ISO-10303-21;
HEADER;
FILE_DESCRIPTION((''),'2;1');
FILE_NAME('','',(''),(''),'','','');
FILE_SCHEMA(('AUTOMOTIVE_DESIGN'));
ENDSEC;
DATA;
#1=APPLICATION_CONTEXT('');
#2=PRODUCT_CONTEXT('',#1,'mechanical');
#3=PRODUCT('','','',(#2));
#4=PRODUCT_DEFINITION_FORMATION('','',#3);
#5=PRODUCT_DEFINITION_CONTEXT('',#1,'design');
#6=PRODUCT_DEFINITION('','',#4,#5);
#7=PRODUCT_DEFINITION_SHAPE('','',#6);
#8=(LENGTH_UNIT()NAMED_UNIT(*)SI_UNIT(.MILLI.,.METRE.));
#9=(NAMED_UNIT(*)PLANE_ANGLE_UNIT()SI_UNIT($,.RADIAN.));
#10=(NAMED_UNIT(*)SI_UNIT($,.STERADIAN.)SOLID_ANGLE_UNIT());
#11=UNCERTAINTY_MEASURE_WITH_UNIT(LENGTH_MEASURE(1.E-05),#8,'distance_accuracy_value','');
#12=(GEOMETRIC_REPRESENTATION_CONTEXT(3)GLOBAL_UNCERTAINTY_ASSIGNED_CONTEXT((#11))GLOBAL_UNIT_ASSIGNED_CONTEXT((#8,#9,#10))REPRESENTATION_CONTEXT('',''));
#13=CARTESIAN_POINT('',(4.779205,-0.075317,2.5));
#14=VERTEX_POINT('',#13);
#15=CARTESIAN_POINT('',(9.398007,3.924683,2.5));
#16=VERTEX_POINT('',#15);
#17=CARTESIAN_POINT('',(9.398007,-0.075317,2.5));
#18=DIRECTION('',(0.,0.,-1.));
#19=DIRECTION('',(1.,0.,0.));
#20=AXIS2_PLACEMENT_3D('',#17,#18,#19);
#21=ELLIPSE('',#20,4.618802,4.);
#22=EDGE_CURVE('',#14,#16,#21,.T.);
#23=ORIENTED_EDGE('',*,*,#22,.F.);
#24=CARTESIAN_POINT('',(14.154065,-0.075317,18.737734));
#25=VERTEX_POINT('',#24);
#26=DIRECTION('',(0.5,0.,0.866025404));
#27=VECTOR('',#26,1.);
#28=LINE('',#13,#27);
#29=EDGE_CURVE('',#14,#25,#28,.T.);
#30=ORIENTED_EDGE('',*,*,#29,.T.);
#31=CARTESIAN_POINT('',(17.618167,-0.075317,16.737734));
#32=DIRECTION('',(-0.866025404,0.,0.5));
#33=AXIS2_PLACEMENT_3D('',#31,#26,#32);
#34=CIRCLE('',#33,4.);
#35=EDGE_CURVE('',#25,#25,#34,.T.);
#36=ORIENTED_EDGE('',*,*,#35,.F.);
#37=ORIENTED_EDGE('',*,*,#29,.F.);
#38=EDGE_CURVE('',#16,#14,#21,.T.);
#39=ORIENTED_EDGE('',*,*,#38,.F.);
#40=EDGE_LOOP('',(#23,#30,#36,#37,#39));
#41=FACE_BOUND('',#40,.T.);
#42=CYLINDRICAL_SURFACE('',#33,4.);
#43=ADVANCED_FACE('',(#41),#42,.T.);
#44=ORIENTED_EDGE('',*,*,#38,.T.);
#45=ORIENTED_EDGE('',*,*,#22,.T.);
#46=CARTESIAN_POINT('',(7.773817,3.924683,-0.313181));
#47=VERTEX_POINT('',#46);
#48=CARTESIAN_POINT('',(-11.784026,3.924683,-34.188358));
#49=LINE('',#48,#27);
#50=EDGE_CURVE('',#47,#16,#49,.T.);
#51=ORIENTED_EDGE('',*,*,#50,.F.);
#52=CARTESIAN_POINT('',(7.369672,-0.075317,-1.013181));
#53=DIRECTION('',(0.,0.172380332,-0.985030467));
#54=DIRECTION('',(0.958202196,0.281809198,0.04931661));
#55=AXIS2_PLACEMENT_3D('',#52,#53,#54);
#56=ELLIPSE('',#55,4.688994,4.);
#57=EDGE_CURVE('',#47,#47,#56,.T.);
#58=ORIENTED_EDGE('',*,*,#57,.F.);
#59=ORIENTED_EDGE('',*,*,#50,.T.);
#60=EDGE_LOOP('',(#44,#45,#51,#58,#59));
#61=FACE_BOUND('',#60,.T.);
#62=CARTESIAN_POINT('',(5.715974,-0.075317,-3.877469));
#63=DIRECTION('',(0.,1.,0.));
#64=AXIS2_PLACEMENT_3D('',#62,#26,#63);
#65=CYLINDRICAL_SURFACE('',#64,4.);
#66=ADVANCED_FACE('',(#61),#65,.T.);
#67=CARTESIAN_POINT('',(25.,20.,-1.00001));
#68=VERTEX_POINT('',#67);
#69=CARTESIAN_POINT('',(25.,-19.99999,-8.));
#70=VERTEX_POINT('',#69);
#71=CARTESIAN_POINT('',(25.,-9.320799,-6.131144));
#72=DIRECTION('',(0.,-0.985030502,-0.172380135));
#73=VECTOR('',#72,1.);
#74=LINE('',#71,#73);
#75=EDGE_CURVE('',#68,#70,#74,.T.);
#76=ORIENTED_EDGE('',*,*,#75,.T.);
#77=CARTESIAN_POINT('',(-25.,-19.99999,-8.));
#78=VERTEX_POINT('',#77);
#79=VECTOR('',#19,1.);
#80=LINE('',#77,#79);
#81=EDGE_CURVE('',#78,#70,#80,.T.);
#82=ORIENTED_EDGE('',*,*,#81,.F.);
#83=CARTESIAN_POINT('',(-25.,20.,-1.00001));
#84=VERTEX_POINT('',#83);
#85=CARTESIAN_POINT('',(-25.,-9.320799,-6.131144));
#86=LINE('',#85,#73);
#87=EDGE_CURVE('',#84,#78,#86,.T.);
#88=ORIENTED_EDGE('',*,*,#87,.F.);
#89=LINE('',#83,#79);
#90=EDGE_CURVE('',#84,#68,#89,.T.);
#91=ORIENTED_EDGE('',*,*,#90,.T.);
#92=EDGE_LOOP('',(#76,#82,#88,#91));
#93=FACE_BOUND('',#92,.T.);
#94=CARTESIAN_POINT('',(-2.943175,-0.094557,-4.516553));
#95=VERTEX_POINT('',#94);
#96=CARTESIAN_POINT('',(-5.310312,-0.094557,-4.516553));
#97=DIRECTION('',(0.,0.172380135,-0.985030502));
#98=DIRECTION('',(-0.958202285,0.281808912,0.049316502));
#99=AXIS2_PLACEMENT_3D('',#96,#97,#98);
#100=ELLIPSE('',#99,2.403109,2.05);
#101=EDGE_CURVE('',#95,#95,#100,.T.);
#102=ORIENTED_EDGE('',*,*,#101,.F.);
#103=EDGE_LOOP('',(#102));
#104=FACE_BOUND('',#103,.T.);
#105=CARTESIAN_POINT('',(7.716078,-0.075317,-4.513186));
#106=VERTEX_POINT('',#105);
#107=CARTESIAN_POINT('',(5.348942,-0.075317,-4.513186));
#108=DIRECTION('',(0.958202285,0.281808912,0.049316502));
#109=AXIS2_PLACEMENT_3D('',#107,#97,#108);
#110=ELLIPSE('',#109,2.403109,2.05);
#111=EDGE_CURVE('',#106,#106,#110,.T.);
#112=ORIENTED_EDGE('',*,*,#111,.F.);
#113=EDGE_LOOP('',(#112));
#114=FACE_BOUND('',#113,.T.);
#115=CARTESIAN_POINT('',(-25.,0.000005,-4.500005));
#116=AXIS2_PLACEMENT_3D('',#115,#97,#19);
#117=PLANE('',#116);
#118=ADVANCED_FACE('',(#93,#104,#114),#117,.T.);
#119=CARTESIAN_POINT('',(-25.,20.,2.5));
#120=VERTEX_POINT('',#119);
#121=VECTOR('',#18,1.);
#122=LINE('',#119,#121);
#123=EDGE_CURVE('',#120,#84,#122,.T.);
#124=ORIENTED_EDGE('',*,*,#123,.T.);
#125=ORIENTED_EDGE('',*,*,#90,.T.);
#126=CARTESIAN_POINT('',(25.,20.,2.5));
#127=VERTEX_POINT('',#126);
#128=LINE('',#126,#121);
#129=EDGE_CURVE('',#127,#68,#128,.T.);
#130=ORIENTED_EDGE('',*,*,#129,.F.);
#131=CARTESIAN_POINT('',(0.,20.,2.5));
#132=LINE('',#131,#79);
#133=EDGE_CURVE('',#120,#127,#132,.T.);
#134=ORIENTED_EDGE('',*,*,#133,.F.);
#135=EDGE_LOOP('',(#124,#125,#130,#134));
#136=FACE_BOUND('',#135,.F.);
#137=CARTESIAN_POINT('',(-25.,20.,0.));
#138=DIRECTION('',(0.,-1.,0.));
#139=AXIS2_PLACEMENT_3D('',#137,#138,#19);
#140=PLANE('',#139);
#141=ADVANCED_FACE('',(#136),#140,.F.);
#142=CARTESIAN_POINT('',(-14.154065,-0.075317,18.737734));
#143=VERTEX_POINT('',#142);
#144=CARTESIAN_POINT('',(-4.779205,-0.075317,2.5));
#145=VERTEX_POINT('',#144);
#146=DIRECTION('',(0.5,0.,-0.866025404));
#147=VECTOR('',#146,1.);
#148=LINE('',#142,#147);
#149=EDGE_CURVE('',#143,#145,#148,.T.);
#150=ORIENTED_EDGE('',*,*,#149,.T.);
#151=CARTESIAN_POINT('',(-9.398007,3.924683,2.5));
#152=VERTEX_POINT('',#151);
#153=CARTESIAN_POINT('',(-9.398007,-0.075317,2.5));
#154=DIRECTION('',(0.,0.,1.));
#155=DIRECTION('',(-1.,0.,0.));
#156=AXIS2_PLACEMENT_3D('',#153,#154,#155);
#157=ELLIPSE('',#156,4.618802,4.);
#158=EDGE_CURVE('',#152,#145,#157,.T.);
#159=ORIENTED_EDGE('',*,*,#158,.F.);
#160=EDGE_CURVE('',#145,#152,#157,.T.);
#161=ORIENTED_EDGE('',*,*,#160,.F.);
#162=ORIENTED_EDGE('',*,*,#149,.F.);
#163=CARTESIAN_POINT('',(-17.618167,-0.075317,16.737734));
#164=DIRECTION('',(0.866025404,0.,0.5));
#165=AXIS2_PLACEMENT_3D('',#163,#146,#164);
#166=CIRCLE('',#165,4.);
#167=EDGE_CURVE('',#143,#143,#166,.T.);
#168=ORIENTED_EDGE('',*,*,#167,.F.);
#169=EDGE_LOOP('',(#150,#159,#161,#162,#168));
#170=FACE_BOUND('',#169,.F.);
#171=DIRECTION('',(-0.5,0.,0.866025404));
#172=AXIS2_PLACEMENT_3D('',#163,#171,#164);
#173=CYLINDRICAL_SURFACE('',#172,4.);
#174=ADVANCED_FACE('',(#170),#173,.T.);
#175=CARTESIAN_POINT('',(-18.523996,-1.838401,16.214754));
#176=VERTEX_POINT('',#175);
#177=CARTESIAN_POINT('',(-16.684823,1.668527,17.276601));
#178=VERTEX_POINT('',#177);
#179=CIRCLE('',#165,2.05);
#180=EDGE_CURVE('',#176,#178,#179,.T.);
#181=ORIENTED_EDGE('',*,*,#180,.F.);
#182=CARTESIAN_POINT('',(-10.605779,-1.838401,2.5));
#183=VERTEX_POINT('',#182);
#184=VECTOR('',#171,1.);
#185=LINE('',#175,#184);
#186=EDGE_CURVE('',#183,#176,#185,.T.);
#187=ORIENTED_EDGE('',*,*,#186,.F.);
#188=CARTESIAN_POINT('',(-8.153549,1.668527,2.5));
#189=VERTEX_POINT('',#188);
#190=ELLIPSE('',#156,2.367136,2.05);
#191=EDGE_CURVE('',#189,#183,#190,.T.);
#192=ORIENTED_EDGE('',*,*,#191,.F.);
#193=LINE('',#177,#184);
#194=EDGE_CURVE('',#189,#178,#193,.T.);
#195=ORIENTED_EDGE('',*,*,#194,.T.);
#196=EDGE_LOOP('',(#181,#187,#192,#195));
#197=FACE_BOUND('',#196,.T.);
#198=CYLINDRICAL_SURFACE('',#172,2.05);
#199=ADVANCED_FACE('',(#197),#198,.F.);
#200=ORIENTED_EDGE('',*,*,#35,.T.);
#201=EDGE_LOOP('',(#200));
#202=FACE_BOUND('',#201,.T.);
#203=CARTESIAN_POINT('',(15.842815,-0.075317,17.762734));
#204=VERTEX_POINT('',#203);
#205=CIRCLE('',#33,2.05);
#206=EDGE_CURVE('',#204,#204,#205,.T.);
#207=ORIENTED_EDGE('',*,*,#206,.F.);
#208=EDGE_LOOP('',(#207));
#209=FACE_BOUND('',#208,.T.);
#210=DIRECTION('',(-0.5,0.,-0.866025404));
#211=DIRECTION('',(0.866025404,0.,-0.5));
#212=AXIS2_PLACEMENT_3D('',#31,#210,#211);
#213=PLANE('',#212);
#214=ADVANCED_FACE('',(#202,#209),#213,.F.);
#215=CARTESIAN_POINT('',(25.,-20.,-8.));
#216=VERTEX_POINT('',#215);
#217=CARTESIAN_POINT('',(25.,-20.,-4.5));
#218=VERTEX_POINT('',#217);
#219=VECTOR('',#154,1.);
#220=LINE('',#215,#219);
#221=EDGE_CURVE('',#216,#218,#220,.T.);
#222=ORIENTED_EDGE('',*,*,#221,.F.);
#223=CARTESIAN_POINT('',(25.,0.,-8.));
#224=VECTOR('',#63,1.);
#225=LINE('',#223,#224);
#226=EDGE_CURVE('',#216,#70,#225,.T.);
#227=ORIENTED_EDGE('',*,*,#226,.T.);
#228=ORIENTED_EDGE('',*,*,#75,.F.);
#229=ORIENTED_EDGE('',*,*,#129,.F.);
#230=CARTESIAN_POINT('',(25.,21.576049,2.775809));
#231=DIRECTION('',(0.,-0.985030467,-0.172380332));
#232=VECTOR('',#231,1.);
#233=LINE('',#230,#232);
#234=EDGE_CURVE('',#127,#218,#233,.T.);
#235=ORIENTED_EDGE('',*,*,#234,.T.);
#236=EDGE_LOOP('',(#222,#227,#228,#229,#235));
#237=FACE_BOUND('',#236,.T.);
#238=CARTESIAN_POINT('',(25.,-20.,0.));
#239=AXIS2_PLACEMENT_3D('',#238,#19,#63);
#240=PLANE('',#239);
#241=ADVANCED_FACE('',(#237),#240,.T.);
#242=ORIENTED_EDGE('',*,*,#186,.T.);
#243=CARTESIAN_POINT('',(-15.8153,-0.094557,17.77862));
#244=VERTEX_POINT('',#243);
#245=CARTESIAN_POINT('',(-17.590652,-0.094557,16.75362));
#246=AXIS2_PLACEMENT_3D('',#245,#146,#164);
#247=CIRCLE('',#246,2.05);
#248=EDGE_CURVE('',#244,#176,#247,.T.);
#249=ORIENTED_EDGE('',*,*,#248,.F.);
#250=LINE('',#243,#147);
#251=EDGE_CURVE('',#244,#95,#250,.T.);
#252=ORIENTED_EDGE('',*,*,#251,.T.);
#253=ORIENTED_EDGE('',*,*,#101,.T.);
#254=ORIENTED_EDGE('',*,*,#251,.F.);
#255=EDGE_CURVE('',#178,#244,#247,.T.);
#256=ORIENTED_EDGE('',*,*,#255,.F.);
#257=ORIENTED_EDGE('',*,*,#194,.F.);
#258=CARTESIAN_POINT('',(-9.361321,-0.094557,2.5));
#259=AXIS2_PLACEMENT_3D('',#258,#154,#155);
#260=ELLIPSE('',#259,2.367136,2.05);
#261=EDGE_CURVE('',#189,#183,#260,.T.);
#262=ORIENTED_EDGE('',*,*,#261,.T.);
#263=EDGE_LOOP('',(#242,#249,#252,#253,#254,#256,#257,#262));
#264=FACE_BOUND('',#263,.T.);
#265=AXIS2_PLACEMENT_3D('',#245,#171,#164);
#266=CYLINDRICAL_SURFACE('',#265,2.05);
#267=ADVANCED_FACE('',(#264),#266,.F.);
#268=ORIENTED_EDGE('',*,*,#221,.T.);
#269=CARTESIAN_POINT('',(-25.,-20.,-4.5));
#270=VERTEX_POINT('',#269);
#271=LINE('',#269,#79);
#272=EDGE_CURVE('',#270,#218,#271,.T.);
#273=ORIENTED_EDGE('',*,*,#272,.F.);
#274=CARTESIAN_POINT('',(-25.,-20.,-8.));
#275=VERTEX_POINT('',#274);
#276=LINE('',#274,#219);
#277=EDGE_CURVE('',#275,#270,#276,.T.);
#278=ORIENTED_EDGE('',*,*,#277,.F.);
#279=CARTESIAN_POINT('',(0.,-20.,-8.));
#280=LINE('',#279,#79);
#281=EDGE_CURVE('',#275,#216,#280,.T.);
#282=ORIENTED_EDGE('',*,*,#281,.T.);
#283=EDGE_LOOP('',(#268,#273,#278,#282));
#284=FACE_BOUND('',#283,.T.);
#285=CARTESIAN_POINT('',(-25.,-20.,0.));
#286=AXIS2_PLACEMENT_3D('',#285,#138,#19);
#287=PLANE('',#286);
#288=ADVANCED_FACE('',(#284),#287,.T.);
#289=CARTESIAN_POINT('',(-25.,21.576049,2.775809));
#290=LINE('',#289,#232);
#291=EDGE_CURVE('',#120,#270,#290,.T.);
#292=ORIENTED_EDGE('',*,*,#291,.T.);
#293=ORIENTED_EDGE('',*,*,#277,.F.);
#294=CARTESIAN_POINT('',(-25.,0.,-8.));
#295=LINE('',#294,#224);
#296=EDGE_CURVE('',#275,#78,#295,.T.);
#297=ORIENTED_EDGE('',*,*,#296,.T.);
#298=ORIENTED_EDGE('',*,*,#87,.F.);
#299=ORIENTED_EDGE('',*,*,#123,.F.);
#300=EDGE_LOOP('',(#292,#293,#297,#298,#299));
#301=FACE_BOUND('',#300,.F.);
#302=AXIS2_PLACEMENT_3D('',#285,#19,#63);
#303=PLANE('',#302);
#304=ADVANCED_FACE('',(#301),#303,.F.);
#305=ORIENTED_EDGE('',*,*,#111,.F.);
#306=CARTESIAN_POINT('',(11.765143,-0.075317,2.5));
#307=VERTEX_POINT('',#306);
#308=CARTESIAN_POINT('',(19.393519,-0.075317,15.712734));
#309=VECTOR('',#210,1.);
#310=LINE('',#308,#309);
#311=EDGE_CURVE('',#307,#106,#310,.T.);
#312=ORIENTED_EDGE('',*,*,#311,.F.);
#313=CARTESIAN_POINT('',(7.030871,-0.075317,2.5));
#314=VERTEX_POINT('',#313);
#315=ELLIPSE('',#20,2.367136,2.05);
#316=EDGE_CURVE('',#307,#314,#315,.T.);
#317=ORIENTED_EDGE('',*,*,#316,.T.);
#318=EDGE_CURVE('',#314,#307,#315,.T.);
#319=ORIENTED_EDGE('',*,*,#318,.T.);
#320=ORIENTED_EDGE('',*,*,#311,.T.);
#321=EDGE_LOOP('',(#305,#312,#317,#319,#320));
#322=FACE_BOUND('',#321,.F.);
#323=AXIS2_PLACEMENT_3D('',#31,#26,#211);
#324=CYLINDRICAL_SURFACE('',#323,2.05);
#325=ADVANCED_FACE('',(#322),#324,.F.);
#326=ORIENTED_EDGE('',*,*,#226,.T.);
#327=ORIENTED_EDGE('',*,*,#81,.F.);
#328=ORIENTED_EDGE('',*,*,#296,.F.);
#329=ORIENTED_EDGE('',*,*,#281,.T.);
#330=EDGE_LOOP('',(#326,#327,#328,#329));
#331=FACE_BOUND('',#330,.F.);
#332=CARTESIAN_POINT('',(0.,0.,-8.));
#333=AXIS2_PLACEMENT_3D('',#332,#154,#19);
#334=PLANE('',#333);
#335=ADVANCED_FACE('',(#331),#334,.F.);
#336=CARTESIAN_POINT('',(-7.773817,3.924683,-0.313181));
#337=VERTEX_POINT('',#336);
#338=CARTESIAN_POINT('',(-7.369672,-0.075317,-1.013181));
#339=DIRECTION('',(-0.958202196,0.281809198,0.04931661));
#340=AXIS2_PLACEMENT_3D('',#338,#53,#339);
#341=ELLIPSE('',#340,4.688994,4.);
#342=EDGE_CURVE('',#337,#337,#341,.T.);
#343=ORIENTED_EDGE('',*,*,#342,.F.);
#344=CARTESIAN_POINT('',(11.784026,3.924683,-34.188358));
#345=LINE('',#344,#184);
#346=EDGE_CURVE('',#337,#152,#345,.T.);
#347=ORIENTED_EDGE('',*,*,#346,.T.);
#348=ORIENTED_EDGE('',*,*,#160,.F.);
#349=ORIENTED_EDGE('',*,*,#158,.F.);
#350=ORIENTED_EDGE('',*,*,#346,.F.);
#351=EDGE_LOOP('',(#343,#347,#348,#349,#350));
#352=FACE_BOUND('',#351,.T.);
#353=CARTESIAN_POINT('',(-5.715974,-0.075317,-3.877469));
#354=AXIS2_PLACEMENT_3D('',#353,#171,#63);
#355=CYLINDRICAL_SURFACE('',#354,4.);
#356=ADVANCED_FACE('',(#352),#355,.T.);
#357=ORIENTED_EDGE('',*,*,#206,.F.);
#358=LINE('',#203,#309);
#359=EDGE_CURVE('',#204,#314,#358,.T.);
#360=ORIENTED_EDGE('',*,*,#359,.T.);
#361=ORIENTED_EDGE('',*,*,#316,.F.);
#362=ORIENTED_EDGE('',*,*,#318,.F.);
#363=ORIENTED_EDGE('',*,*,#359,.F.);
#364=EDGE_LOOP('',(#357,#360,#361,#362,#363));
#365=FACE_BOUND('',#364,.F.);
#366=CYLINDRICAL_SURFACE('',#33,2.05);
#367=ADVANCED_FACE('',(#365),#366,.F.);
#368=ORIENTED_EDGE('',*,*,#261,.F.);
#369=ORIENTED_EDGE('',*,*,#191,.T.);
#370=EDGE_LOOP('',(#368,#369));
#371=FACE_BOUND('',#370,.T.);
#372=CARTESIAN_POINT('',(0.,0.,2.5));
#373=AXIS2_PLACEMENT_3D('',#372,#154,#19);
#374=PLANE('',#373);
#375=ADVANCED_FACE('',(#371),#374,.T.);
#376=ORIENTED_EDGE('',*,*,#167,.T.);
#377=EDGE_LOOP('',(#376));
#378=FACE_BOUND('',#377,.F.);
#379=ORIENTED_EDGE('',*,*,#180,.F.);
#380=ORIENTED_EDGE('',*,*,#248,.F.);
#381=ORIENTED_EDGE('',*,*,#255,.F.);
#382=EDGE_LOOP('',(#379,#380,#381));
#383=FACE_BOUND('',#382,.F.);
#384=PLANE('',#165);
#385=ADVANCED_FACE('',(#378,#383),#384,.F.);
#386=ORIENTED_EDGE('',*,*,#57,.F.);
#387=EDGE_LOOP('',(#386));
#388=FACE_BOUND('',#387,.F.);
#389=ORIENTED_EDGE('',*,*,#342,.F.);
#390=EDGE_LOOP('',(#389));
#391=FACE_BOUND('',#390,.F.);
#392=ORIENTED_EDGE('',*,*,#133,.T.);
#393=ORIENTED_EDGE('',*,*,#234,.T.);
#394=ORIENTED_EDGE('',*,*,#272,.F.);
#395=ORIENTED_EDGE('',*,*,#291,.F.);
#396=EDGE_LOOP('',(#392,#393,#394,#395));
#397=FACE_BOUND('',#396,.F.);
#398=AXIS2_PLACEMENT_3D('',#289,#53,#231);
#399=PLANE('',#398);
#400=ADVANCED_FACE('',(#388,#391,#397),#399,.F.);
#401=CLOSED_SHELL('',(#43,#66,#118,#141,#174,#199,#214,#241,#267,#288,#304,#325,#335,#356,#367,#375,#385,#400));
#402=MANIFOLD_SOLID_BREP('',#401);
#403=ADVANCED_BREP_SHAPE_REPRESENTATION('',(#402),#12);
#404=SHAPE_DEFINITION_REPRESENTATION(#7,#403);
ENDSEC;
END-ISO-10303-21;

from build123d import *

# Parameters (mm, degrees)
F0_W         = 50
F0_H         = 40
F1_DEPTH     = 2.5
F7_R         = 4
F7_R_2       = 2.05
F10_DEPTH    = 8
F11_SIZE2    = 39.99999
F11_SIZE     = 6.99999
F6_R         = 2.05
F12_DEPTH    = 46.3
F13_R        = 2.05
F14_DEPTH    = 68.7
F15_T4_DEPTH = 50
F15_S5_R     = 4
F15_T6_DEPTH = 35
F15_S7_R     = 4
F15_T8_DEPTH = 35


# Not quite as in the source:
# - a fillet or chamfer that OpenCascade refuses, or shapes differently, is made with other operations: its cross-section is extruded or revolved along the edge and cut away or added
# - a fillet or chamfer is up to 0.001 mm smaller than in the source, because OpenCascade refuses the exact size


with BuildPart() as f1:
    # F0 (on Top) → F1 (new body)
    with BuildSketch(Plane.XY):
        Rectangle(F0_W, F0_H)
    extrude(amount=F1_DEPTH)

    # F7 (on offset) → F8 (join, up to the last surface of F1)
    with BuildSketch(Plane(origin=(-11.6521931986, 0, 20.1821906397), x_dir=(0.8660254038, 0, 0.5), z_dir=(0.5, 0, -0.8660254038))):
        with Locations((-6.8889131071, 0.075317279)):
            Circle(F7_R)
        with Locations((-6.8889131071, 0.075317279)):
            Circle(F7_R_2, mode=Mode.SUBTRACT)
    extrude(until=Until.LAST)

    # F9: F1 across plane


with BuildPart() as f1_1:
    add(f1.part)
    add(f1.part.mirror(Plane.YZ))

    # F0 (on Top) → F10 (join)
    with BuildSketch(Plane.XY):
        Rectangle(F0_W, F0_H)
    extrude(amount=-F10_DEPTH)

    # F11 (size 7 and 40 in the source; OpenCascade refuses exactly that, so slightly less here)
    f11_edges = [f1_1.edges().sort_by_distance(p)[0] for p in [
        (0, 20, -8),
    ]]
    f11_side = f1_1.faces().sort_by_distance((0, 20, -2.75))[0]
    chamfer(f11_edges, length=F11_SIZE, length2=F11_SIZE2, reference=f11_side)

    # F6 (on offset) → F12 (cut)
    with BuildSketch(Plane(origin=(-11.6521931986, 0, 20.1821906397), x_dir=(0.8660254038, 0, 0.5), z_dir=(0.5, 0, -0.8660254038))):
        with Locations((-6.8571413867, 0.094557312)):
            Circle(F6_R)
    extrude(amount=F12_DEPTH, mode=Mode.SUBTRACT)

    # F13 (on offset) → F14 (cut)
    with BuildSketch(Plane(origin=(11.6521931986, 0, 20.1821906397), x_dir=(0.8660254038, 0, -0.5), z_dir=(0.5, 0, 0.8660254038))):
        with Locations((6.8889131072, -0.075317279)):
            Circle(F13_R)
    extrude(amount=-F14_DEPTH, mode=Mode.SUBTRACT)

    # F15: chamfer of 7 x 40 on 1 edges, made by hand


with BuildPart() as f15_tool2:
    # F15_s3 → F15_t4 (new body)
    with BuildSketch(Plane.YZ.offset(-25)):
        with BuildLine():
            Line((21.5760487474, 2.7758085308), (-21.5760487474, -4.7758085308))
            Line((-21.5760487474, -4.7758085308), (-22.3760487474, -4.7758085308))
            ThreePointArc((-22.3760487474, -4.7758085308), (-20.8, -1.1379042654), (-20.8, 2.5))
            Line((-20.8, 2.5), (-20, 3.3))
            ThreePointArc((-20, 3.3), (0.7880243737, 3.3), (21.5760487474, 3.5758085308))
            Line((21.5760487474, 3.5758085308), (21.5760487474, 2.7758085308))
        make_face()
    extrude(amount=F15_T4_DEPTH)

    # F15_s5 → F15_t6 (cut, symmetric)
    with BuildSketch(Plane(origin=(0.25, 0, -0.4330127019), x_dir=(0, 1, 0), z_dir=(-0.5, 0, 0.8660254038))):
        with Locations((-0.075317279, 6.8889131071)):
            Circle(F15_S5_R)
    extrude(amount=F15_T6_DEPTH, both=True, mode=Mode.SUBTRACT)

    # F15_s7 → F15_t8 (cut, symmetric)
    with BuildSketch(Plane(origin=(-0.25, 0, -0.4330127019), x_dir=(0, 1, 0), z_dir=(0.5, 0, 0.8660254038))):
        with Locations((-0.075317279, -6.8889131071)):
            Circle(F15_S7_R)
    extrude(amount=F15_T8_DEPTH, both=True, mode=Mode.SUBTRACT)


with BuildPart() as f1_2:
    add(f1_1.part)

    # F15_t1: cut F15_tool2
    add(f15_tool2.part, mode=Mode.SUBTRACT)


solid = f1_2.part
